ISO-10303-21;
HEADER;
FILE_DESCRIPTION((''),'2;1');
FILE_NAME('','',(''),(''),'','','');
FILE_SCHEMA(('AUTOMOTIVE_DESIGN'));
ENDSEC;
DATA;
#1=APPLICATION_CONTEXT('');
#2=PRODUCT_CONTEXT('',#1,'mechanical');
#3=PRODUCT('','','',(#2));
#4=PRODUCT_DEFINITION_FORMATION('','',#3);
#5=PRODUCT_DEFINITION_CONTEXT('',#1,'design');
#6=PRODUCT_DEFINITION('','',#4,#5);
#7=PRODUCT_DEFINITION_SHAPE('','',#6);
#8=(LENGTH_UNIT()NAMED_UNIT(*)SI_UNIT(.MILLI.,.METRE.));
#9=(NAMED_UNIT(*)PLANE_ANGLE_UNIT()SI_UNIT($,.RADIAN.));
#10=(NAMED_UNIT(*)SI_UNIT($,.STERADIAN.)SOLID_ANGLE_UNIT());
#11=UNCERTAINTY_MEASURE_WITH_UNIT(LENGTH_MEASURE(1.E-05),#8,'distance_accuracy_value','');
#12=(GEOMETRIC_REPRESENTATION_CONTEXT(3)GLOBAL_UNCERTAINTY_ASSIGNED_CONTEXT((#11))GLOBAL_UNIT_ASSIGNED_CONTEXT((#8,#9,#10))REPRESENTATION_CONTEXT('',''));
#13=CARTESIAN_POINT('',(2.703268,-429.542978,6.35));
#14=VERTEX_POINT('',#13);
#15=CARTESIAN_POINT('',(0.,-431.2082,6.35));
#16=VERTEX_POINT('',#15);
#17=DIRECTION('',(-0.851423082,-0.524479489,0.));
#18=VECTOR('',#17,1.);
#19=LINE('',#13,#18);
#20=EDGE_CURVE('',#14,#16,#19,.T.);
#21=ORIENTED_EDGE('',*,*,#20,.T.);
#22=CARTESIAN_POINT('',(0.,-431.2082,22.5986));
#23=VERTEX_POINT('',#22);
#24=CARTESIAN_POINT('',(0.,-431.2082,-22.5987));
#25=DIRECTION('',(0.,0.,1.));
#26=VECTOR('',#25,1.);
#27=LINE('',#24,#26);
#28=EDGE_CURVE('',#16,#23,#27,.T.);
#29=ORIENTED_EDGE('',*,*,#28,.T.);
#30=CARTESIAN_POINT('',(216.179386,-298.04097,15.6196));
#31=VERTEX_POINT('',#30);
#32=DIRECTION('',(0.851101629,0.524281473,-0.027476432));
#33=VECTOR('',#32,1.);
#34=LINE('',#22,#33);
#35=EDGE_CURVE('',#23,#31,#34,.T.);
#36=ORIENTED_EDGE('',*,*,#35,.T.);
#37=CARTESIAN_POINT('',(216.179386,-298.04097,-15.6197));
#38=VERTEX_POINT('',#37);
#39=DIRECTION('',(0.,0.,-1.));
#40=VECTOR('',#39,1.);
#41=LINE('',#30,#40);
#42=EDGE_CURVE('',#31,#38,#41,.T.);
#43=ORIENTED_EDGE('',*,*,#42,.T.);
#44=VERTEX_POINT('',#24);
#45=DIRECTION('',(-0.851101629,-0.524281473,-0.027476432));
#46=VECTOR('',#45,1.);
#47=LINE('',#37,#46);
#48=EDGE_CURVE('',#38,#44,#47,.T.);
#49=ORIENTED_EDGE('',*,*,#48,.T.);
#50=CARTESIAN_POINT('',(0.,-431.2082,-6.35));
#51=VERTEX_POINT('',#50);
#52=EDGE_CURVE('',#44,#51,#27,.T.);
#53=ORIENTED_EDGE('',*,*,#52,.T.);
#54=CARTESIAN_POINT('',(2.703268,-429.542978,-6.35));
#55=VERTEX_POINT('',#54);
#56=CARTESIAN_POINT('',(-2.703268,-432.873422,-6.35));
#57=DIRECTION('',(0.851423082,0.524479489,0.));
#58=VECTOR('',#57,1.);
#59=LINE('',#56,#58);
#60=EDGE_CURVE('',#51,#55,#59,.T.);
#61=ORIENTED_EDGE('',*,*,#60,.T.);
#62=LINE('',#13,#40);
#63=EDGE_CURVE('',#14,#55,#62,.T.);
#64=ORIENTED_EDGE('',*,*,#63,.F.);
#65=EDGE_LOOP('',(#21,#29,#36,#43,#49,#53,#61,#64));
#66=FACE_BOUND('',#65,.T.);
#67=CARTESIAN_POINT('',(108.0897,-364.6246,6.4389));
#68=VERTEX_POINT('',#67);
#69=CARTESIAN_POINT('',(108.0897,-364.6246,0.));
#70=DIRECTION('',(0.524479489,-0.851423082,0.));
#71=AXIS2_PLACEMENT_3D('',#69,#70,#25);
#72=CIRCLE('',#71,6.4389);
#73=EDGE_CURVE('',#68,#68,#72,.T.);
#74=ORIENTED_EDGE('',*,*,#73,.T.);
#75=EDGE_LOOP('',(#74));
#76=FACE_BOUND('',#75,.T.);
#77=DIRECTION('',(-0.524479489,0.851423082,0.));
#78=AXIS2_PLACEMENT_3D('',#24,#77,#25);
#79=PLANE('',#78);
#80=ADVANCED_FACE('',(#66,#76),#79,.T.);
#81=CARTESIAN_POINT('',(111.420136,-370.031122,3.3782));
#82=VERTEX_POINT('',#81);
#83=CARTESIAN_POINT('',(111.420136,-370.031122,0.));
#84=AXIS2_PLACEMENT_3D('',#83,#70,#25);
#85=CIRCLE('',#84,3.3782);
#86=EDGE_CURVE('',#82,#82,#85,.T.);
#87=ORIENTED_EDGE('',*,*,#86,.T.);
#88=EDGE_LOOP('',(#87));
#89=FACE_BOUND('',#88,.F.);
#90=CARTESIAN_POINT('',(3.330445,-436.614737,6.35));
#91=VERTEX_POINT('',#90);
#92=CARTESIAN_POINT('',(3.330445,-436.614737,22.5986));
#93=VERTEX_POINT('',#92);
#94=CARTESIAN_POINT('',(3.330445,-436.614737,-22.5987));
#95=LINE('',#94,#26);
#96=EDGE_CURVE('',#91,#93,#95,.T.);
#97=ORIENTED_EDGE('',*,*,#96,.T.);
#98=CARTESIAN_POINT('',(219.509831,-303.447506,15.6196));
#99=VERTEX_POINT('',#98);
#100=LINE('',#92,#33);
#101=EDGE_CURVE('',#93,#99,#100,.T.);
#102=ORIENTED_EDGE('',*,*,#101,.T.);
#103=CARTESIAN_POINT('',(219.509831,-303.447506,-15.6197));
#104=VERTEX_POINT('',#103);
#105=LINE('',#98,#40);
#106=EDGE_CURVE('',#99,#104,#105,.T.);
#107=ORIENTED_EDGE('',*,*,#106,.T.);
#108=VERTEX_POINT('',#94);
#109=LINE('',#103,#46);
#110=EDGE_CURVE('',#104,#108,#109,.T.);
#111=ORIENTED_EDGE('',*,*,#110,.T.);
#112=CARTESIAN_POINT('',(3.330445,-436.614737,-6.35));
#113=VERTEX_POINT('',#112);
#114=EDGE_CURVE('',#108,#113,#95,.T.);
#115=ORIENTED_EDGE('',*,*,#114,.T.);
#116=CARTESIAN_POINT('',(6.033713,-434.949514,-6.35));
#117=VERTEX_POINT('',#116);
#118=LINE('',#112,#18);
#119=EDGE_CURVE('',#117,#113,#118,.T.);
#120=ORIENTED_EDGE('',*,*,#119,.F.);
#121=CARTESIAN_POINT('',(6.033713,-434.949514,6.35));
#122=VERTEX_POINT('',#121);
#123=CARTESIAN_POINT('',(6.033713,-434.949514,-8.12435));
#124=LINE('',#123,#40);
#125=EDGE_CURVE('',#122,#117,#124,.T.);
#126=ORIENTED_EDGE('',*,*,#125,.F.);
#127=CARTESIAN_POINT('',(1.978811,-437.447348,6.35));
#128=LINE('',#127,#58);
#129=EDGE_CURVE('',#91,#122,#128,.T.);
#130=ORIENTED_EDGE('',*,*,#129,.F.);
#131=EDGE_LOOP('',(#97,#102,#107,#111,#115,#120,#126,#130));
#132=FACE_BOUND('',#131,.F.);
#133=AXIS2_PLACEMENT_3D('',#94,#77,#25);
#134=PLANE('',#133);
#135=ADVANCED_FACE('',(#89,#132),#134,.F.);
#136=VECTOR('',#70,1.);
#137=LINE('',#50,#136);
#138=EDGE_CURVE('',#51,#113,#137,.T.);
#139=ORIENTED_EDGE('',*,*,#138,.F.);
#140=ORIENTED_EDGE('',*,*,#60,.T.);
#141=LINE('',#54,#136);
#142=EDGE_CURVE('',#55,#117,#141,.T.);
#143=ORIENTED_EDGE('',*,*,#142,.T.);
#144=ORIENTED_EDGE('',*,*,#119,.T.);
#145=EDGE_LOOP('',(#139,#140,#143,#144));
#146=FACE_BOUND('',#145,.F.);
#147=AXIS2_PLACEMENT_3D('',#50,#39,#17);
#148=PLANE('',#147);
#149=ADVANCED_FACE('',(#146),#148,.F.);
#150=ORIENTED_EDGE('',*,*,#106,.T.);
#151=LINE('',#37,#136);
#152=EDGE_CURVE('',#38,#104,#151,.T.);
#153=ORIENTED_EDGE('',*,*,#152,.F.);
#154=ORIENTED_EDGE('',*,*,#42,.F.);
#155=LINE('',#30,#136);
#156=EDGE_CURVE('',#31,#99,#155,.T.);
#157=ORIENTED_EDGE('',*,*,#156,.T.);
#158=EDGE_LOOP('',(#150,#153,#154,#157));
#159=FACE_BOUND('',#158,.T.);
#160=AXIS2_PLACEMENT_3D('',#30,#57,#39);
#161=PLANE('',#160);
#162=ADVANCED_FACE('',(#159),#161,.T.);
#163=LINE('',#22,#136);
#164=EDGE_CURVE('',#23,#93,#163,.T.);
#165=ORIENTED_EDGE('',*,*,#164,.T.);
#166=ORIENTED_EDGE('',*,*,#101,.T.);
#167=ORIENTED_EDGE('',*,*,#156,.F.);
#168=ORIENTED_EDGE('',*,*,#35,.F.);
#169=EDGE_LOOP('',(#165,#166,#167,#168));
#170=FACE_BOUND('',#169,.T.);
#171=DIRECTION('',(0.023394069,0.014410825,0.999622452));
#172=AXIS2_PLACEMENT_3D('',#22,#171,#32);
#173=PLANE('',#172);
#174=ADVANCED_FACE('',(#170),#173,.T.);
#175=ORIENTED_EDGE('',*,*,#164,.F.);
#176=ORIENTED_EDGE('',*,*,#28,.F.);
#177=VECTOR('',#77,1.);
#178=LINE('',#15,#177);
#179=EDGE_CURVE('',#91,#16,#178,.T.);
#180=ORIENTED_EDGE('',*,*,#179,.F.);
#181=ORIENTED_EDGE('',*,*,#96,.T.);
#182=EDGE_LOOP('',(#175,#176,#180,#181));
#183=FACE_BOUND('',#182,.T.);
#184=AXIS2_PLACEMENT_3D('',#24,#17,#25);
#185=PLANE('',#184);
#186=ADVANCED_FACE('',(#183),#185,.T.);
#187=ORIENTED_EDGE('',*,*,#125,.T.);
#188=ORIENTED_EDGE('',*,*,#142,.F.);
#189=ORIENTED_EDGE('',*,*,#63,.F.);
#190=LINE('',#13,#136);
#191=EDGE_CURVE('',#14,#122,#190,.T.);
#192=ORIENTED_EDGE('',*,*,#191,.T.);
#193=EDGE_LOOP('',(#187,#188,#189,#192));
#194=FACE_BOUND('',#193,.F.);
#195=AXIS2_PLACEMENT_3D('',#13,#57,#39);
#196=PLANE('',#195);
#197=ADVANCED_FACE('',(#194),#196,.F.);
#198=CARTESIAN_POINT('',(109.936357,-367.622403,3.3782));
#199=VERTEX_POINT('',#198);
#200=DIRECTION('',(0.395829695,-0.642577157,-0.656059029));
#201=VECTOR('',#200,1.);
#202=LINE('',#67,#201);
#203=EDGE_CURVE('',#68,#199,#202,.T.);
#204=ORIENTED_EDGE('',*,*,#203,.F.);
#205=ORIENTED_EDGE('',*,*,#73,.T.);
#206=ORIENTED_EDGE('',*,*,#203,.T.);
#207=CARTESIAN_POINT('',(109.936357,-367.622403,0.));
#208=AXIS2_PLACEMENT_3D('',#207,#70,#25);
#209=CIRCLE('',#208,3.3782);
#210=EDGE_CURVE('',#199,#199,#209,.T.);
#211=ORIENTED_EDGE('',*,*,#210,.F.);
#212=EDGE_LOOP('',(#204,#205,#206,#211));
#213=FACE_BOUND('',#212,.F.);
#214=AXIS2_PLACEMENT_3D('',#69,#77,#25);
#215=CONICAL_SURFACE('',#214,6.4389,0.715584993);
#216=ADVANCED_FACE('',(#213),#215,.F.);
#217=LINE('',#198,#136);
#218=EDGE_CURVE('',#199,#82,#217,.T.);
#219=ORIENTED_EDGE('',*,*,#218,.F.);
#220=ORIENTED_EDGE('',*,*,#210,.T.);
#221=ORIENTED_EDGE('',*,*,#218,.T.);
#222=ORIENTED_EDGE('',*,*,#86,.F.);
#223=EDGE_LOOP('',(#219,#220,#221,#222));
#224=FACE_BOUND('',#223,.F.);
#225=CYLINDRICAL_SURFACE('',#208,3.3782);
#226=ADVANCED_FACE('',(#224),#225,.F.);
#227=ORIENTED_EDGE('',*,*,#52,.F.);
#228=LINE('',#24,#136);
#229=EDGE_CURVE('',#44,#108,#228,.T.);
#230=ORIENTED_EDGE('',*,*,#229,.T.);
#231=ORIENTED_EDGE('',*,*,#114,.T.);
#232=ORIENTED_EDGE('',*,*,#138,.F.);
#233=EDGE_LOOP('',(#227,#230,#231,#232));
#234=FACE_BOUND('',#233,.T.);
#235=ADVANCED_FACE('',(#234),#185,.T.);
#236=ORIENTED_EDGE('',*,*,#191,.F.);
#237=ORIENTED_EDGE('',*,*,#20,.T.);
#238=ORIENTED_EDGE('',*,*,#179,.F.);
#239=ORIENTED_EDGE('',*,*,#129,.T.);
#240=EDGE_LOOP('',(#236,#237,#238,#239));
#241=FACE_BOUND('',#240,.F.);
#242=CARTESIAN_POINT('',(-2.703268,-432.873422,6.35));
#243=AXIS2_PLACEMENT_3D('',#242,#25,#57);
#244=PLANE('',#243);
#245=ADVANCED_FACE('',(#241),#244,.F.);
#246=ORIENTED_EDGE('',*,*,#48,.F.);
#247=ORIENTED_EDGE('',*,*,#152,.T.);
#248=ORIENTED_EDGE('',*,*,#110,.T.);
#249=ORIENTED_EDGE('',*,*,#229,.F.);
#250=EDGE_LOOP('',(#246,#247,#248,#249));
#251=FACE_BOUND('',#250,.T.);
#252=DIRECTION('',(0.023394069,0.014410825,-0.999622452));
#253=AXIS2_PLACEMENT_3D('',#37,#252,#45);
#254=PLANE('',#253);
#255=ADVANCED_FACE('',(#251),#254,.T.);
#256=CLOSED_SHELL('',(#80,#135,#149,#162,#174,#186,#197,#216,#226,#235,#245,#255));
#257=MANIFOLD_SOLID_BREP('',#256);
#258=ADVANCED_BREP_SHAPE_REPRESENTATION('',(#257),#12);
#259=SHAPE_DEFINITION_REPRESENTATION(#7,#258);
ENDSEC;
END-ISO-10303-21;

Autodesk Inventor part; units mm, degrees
ref_plane "XZ Plane" through (0, 0, 0) normal (0, 1, 0) x (-1, 0, 0)
sketch "Sketch1" plane through (0, 0, 0) normal (1, 0, 0) x (0, 1, 0)
  circle A0 centre (0, 0) radius 431.8 construction
  line L0 (-431.2082, -22.5987) -> (-431.2082, 22.5987)
  line L1 (-431.2082, -22.5987) -> (-386.0109, -22.5987) construction
  line L2 (-431.2082, -22.5987) -> (0, 0) construction
  line L3 (0, 0) -> (-431.2082, 22.5987) construction
  dimension "d0" = 863.6
  dimension "d3" = 90
  dimension "d4" = 6
ref_plane "Work Plane1" through (216.1794, 0, 0) normal (1, 0, 0) x (0, 1, 0)
sketch "Sketch2" plane through (216.1794, 0, 0) normal (1, 0, 0) x (0, 1, 0)
  circle A0 centre (0, 0) radius 298.45 construction
  line L0 (-298.041, 15.6197) -> (-298.041, -15.6197)
  line L1 (-298.041, 15.6197) -> (-266.8017, 15.6197) construction
  line L2 (-298.041, 15.6197) -> (0, 0) construction
  line L3 (0, 0) -> (-298.041, -15.6197) construction
  dimension "d2" = 596.9
  dimension "d5" = 90
  dimension "d6" = 6
ref_plane "Work Plane2" through (0, -431.2082, -22.5987) normal (-0.5244795, 0.8514231, 0) x (0, 0, 1)
sketch "Sketch3" plane through (0, -431.2082, -22.5987) normal (-0.5244795, 0.8514231, 0) x (0, 0, 1)
  line L0 (0, 0) -> (45.1973, 0) projected
  line L1 (38.2183, 253.9036) -> (6.979, 253.9036) projected
  line L2 (6.979, 253.9036) -> (0, 0)
  line L3 (45.1973, 0) -> (38.2183, 253.9036)
  point P0 (22.5987, 226.1599)
extrude "Extrusion1" add sketch "Sketch3" against normal blind 6.35
sketch "Sketch5" plane through (0, -431.2082, -22.5987) normal (-0.5244795, 0.8514231, 0) x (0.8514231, 0.5244795, 0)
  line L0 (-3.175, -28.9487) -> (3.175, -28.9487)
  line L1 (3.175, -28.9487) -> (3.175, -16.2487)
  line L2 (3.175, -16.2487) -> (-3.175, -16.2487)
  line L3 (-3.175, -16.2487) -> (-3.175, -28.9487)
  line L4 (0, -45.1973) -> (0, 0) projected
  line L5 (-3.175, -28.9487) -> (3.175, -16.2487) construction
  line L6 (3.175, -28.9487) -> (-3.175, -16.2487) construction
  point P0 (226.1599, -22.5987)
  point P1 (0, -22.5987)
  point P2 (0, -28.9487)
  point P3 (0, -16.2487)
  dimension "d17" = 6.35
  dimension "d18" = 12.7
extrude "Extrusion3" cut sketch "Sketch5" against normal through all
sketch "Sketch6" plane through (0, -431.2082, -22.5987) normal (-0.5244795, 0.8514231, 0) x (0.8514231, 0.5244795, 0)
  line L0 (253.9036, -38.2183) -> (253.9036, -6.979) projected
  line L1 (0, 0) -> (0, -16.2487) projected
  line L2 (253.9036, -6.979) -> (253.9036, -38.2183) projected
  line L3 (253.9036, -22.5987) -> (3.175, -22.5987) construction
  line L4 (3.175, -16.2487) -> (3.175, -28.9487) projected
  point P0 (226.1599, -22.5987)
  point P1 (126.9518, -22.5987)
  dimension "d21" = 253.9036
  dimension "d22" = 126.9518
hole "Hole1" at (108.0897, -364.6246, 0) direction (0.5244795, -0.8514231, 0) diameter 6.7564 end through all countersink diameter 12.8778 countersink angle 82 clearance for "Flat Head Machine Screw (82)" size "1/4" standard "Ansi Unified Screw Threads"
equation "\"d22\" = 0.5 * d21"
properties part number "Touch Fifth" material "Polycarbonate, Clear"
